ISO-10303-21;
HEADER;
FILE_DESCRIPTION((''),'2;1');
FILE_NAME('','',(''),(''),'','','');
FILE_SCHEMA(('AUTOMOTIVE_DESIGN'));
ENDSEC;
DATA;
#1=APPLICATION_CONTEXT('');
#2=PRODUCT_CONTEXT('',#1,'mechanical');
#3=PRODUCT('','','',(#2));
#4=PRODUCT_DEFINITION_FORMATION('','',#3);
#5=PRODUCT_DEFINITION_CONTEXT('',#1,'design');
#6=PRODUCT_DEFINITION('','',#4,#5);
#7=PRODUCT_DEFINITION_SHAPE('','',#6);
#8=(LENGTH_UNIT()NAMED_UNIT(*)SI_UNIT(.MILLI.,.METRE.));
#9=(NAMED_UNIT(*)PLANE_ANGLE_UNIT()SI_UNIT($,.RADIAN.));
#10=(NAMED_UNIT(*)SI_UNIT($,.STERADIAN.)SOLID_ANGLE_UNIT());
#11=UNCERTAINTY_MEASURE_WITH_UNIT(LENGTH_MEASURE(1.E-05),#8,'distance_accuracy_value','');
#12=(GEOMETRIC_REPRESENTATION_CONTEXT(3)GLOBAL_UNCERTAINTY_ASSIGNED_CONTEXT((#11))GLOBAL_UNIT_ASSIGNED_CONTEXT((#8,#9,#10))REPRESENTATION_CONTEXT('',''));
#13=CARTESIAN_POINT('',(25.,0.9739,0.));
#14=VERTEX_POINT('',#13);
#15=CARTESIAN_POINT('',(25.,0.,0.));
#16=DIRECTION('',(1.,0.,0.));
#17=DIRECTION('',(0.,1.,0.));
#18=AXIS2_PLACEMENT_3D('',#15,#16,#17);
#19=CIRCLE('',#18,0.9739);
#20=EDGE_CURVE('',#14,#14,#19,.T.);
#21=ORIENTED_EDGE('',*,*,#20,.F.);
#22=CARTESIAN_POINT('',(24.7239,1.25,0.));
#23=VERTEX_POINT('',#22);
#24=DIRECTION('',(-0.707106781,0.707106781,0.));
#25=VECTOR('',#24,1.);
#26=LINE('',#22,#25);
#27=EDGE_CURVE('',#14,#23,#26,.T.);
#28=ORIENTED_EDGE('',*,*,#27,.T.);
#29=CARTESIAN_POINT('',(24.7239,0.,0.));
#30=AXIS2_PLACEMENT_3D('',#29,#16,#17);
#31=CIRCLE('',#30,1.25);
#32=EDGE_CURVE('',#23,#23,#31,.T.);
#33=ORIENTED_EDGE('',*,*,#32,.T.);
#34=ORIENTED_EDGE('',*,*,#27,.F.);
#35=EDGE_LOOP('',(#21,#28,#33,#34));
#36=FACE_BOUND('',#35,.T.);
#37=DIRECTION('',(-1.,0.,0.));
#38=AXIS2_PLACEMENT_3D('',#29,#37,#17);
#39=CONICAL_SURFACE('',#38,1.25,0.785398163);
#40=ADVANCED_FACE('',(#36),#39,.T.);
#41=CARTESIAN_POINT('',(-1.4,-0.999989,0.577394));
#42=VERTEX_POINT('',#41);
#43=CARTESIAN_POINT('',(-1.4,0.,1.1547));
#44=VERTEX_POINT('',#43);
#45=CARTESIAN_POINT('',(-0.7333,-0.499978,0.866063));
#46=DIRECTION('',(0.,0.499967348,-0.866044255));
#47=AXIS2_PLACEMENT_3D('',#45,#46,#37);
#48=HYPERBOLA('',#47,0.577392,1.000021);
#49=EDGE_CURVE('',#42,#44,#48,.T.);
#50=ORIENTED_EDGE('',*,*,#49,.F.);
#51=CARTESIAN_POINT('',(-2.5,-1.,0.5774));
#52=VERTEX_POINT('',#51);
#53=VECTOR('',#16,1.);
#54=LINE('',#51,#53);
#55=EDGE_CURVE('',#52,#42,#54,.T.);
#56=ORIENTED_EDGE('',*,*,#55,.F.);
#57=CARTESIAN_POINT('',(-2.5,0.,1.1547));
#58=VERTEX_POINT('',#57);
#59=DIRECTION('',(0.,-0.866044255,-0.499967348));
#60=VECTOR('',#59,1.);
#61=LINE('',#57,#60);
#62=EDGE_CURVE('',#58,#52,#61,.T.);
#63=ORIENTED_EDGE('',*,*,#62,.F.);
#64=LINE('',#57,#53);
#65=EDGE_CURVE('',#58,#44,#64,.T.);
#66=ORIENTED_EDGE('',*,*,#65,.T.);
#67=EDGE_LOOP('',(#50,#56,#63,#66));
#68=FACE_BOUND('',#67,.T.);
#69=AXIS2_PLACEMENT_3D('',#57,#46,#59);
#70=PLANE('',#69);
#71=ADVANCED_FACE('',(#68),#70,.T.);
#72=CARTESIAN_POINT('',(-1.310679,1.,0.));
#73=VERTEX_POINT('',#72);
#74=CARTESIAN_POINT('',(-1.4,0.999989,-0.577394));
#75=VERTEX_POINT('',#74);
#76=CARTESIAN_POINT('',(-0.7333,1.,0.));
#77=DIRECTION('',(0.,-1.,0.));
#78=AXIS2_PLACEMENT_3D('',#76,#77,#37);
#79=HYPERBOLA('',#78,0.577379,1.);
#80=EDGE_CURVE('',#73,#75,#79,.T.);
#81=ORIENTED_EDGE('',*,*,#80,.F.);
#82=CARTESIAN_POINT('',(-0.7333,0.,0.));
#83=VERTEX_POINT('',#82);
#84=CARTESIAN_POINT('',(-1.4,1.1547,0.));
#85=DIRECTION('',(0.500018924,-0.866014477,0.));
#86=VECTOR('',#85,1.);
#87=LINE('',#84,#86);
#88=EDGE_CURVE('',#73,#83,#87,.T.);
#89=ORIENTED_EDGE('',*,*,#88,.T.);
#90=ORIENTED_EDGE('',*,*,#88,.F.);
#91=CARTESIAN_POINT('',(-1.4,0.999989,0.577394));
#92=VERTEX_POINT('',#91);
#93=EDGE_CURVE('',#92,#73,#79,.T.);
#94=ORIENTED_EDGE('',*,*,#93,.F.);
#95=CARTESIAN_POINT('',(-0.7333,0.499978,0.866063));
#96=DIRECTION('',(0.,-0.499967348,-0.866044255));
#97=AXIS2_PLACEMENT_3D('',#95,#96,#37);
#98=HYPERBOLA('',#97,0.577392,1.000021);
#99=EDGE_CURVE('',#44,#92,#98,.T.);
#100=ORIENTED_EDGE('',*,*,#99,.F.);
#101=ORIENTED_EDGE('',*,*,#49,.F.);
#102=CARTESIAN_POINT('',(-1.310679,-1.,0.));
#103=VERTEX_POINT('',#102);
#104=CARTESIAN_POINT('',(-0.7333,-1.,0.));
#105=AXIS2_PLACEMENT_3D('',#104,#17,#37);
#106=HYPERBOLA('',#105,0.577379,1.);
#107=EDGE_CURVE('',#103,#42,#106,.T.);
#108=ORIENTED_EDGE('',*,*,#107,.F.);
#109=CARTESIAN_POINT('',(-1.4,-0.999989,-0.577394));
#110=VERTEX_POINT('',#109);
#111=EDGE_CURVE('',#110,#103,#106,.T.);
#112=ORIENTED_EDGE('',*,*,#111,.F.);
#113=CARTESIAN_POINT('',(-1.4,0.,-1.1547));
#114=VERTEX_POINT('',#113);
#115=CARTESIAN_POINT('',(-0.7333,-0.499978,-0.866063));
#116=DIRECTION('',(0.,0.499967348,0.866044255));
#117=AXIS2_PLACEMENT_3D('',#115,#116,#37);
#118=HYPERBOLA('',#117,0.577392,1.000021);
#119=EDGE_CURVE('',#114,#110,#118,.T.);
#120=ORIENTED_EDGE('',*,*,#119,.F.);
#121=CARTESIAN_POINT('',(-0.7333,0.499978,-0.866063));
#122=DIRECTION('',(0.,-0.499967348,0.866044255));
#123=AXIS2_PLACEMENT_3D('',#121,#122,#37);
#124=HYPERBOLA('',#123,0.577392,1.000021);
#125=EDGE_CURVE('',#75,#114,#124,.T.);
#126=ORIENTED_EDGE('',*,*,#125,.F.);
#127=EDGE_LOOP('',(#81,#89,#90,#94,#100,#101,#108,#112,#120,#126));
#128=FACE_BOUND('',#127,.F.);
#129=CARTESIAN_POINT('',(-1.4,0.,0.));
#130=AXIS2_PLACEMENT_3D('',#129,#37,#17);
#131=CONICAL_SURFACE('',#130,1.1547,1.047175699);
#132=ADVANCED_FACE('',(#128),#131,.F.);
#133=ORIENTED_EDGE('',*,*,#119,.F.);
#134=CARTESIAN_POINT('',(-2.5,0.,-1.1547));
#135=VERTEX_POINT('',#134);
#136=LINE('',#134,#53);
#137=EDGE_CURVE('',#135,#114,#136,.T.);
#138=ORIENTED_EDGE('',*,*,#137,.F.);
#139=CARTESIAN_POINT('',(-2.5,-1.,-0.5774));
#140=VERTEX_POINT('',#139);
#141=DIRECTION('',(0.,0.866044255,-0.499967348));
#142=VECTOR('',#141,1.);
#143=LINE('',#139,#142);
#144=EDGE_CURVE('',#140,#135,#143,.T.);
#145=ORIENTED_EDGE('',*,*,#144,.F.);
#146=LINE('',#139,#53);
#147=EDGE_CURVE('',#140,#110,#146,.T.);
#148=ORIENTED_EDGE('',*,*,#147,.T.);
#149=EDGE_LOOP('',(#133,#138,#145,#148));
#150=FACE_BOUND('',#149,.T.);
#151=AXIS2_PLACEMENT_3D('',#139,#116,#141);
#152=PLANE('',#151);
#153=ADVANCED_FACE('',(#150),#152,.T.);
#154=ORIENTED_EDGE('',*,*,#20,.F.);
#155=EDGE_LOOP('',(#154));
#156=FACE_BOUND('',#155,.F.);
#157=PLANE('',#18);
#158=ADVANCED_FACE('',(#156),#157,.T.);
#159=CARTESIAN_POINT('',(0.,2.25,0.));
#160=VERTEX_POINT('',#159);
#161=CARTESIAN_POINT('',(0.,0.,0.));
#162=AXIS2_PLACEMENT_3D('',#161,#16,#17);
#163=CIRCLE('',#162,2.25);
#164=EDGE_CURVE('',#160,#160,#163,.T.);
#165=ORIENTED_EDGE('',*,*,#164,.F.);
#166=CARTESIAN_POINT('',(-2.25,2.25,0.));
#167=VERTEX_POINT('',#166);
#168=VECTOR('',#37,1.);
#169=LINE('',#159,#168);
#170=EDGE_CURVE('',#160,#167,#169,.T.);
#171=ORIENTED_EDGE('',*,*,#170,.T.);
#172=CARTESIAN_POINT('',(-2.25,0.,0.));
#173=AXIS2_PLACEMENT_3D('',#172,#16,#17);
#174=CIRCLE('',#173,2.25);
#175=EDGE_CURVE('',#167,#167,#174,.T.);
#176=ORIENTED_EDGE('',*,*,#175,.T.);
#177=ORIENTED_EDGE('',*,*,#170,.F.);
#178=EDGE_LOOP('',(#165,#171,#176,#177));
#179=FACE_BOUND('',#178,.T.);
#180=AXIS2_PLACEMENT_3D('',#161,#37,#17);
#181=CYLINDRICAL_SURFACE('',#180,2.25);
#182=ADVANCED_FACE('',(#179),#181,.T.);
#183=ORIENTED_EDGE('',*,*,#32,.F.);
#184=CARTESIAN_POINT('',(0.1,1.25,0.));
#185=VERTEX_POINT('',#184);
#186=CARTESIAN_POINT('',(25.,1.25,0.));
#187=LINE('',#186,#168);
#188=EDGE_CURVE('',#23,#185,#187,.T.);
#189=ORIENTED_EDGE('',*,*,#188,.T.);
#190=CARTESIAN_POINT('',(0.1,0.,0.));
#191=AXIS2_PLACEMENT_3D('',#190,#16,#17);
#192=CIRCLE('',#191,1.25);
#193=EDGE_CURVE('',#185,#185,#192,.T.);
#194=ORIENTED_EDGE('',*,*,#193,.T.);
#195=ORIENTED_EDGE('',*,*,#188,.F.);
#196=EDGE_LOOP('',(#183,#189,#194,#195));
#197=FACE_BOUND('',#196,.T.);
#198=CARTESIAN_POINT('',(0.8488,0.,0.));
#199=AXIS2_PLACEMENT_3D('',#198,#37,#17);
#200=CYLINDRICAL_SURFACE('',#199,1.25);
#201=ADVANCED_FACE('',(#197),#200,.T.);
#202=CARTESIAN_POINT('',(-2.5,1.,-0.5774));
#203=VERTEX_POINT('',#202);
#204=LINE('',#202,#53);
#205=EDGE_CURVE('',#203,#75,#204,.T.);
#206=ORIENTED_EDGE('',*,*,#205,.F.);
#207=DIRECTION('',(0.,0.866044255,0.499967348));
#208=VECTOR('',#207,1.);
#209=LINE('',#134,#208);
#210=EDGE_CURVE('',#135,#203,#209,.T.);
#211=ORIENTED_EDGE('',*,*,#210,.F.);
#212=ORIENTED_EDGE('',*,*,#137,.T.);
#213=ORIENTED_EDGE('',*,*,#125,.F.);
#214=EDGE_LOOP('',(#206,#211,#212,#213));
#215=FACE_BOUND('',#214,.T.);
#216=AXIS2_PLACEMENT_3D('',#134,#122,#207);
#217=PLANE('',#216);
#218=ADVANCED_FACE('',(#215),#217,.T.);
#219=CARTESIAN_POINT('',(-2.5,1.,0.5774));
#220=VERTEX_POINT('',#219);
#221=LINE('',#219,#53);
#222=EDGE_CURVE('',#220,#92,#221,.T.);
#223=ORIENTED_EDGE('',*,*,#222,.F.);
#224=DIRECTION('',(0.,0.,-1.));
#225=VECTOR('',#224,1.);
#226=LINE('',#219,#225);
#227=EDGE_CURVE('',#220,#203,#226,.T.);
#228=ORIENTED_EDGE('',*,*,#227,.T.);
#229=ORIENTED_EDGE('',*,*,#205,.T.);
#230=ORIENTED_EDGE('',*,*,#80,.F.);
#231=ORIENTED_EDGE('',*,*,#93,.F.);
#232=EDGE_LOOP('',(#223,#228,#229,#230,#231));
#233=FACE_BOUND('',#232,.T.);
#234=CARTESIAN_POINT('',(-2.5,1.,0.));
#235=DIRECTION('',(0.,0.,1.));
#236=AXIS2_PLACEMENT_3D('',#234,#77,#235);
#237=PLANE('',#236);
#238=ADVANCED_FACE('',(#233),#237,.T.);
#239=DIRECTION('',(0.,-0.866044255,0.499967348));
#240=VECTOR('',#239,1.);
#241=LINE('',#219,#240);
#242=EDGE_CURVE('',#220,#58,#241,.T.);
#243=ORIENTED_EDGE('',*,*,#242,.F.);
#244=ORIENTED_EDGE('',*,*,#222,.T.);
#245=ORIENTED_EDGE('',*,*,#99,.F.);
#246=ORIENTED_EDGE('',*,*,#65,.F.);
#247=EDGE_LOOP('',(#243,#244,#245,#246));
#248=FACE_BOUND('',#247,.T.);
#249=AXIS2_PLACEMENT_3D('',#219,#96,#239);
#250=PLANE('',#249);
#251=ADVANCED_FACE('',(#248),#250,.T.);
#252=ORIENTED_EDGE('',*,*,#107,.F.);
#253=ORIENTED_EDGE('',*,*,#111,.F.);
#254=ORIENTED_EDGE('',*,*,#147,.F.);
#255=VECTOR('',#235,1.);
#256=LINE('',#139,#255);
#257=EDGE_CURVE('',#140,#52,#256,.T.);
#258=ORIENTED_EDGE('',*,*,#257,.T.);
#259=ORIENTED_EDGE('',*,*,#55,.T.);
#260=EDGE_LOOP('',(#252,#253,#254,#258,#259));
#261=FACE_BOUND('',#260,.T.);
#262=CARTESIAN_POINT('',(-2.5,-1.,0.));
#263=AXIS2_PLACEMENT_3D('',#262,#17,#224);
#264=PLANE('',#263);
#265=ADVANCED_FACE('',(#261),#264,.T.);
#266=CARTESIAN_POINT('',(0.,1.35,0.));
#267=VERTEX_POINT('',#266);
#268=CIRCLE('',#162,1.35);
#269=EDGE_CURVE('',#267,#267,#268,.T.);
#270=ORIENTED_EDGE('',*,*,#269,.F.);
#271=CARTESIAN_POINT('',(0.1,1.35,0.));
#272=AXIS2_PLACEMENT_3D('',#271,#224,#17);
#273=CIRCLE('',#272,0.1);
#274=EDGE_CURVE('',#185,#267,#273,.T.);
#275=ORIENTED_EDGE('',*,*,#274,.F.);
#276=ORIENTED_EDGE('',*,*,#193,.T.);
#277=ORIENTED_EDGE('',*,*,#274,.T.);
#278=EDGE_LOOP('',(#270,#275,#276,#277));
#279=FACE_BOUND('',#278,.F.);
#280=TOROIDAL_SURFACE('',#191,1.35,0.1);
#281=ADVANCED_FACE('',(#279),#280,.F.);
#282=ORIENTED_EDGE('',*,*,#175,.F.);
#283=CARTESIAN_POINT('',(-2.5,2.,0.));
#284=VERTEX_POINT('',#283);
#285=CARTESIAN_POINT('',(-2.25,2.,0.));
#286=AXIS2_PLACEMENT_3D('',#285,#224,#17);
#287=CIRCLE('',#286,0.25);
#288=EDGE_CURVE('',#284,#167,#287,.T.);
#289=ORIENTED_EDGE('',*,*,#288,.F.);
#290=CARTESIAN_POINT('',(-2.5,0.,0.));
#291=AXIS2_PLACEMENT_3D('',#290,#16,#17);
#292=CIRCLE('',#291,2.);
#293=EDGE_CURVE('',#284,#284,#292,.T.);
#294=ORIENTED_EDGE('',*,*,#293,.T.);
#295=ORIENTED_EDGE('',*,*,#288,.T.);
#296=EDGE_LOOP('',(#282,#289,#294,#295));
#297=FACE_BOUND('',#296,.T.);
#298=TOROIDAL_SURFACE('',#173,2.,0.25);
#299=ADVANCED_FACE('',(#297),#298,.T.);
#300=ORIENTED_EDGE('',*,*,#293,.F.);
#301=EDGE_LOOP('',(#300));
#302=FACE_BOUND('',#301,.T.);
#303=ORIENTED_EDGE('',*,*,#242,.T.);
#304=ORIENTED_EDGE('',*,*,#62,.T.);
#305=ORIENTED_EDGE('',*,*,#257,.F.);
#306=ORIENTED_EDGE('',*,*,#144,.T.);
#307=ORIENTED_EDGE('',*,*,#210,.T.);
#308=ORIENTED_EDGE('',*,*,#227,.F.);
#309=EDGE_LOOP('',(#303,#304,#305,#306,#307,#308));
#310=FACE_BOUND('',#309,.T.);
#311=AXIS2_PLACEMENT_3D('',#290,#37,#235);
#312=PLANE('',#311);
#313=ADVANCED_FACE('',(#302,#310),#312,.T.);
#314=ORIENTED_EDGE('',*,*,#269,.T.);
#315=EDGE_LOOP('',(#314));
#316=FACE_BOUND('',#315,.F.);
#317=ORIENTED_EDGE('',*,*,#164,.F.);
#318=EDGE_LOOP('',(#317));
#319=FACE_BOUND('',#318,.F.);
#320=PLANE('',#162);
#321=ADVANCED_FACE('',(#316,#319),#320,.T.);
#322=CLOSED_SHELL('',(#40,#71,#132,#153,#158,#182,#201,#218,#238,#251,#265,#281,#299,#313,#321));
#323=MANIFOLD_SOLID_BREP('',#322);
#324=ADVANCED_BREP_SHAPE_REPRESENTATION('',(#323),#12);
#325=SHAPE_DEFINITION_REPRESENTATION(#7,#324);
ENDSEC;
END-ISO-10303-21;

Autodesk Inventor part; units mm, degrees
ref_plane "YZ Plane" through (0, 0, 0) normal (1, 0, 0) x (0, 1, 0)
ref_plane "XZ Plane" through (0, 0, 0) normal (0, 1, 0) x (-1, 0, 0)
sketch "Skizze1" plane through (0, 0, 0) normal (0, 0, 1) x (1, 0, 0)
  line L0 (-0.7333, 0) -> (25, 0)
  line L1 (25, 0) -> (25, 1.25)
  line L2 (25, 1.25) -> (1.125, 1.25)
  line L3 (1.125, 1.25) -> (0.8488, 1.25)
  line L4 (0.8488, 1.25) -> (0, 1.25)
  line L5 (0, 1.25) -> (0, 2.25)
  line L6 (0, 2.25) -> (-2.5, 2.25)
  line L7 (-2.5, 2.25) -> (-2.5, 1.1547)
  line L8 (-2.5, 1.1547) -> (-1.4, 1.1547)
  line L9 (-1.4, 1.1547) -> (-0.7333, 0)
  line L10 (-8, 0) -> (30.5, 0) projected
  line L11 (0, -0.45) -> (0, 2.7) projected
  line L12 (1.125, 1.25) -> (0, 1.25) construction
  dimension "d1" = 23.875
  dimension "d2" = 0.2762
  dimension "d3" = 2.5
  dimension "d4" = 1.1
  dimension "d5" = 60
  dimension "d6" = 2.5
  dimension "d7" = 2.5
  dimension "d8" = 2.3094
  dimension "d9" = 4.5
  dimension "d26" = 25
revolve "Körper" add sketch "Skizze1" angle 360 about axis through (-0.7333, 0, 0) along (1, 0, 0)
sketch "Skizze2" plane through (-2.5, 0, 0) normal (-1, 0, 0) x (0, 0, 1)
  circle A0 centre (0, 0) radius 1.1547 projected
  line L0 (0, -3.15) -> (0, 3.15) projected
  line L1 (-3.15, 0) -> (3.15, 0) projected
  line L2 (1.1547, 0) -> (0.5774, -1)
  line L3 (0.5774, -1) -> (-0.5774, -1)
  line L4 (-0.5774, -1) -> (-1.1547, 0)
  line L5 (-1.1547, 0) -> (-0.5774, 1)
  line L6 (-0.5774, 1) -> (0.5774, 1)
  line L7 (0.5774, 1) -> (1.1547, 0)
extrude "Loch" add sketch "Skizze2" against normal up to next contours L7 A0 | A0 L2 | L6 L0 A0 | A0 L0 L3 | L0 L6 A0 | A0 L3 L0 | L4 A0 | A0 L5
fillet "Rundung1" radius 0.25 1 edges at (-2.5, -2.25, 0)
thread "Gewinde" size "M2.5x0.45" class "6g" standard "ISO Metric profile" length 23.875
chamfer "Fase1" distance 0.2761 distance2 0.2761 1 edges at (25, -1.25, 0) measured on face at (25, -0.731, -0.331)
ref_plane "Work Plane1" through (29, 0, 0) normal (0, -1, 0) x (1, 0, 0)
fillet "Fillet2" radius 0.1 1 edges at (0, -1.25, 0)
equation "\"d1\" = GEL"
equation "\"d3\" = KOH"
equation "\"d4\" = INTI"
equation "\"d6\" = GD"
equation "\"d7\" = BDM"
equation "\"d8\" = 1.1547 * SW"
equation "\"d9\" = KOD"
equation "\"d26\" = NLG"
equation "\"d30\" = R"
equation "\"d17\" = RR"
equation "\"d13\" = GEL"
equation "\"d15\" = -0.5 * SPD + 0.5 * GD"
equation "\"d16\" = GUL"
equation "\"GD\" = NND"
equation "\"NLG\" = 25"
equation "\"GEL\" = 23.875"
equation "\"KOD\" = 4.5"
equation "\"KOH\" = 2.5"
equation "\"INTI\" = 1.1"
equation "\"GAL\" = 0.61345 * PTC"
equation "\"GUL\" = 0.61345 * PTC"
equation "\"BDM\" = NND"
equation "\"SW\" = 2"
equation "\"RR\" = 0.25"
equation "\"SPD\" = NND - 1.2269 * PTC"
equation "\"R\" = 0.1"
equation "\"TOA\" = 30deg"
equation "\"GD1\" = THREADDIA - 1.2269 * PTC"
equation "\"THREADDIA\" = 2.5"
equation "\"FAWI\" = 45deg"
equation "\"ANG\" = 120deg"
equation "\"PTC\" = 0.45"
equation "\"NND\" = 2.5"
equation "\"E0\" = 1.155 * SW"
properties part number "DIN 912 - M2,5 x 25" material "Stahl, weich"
